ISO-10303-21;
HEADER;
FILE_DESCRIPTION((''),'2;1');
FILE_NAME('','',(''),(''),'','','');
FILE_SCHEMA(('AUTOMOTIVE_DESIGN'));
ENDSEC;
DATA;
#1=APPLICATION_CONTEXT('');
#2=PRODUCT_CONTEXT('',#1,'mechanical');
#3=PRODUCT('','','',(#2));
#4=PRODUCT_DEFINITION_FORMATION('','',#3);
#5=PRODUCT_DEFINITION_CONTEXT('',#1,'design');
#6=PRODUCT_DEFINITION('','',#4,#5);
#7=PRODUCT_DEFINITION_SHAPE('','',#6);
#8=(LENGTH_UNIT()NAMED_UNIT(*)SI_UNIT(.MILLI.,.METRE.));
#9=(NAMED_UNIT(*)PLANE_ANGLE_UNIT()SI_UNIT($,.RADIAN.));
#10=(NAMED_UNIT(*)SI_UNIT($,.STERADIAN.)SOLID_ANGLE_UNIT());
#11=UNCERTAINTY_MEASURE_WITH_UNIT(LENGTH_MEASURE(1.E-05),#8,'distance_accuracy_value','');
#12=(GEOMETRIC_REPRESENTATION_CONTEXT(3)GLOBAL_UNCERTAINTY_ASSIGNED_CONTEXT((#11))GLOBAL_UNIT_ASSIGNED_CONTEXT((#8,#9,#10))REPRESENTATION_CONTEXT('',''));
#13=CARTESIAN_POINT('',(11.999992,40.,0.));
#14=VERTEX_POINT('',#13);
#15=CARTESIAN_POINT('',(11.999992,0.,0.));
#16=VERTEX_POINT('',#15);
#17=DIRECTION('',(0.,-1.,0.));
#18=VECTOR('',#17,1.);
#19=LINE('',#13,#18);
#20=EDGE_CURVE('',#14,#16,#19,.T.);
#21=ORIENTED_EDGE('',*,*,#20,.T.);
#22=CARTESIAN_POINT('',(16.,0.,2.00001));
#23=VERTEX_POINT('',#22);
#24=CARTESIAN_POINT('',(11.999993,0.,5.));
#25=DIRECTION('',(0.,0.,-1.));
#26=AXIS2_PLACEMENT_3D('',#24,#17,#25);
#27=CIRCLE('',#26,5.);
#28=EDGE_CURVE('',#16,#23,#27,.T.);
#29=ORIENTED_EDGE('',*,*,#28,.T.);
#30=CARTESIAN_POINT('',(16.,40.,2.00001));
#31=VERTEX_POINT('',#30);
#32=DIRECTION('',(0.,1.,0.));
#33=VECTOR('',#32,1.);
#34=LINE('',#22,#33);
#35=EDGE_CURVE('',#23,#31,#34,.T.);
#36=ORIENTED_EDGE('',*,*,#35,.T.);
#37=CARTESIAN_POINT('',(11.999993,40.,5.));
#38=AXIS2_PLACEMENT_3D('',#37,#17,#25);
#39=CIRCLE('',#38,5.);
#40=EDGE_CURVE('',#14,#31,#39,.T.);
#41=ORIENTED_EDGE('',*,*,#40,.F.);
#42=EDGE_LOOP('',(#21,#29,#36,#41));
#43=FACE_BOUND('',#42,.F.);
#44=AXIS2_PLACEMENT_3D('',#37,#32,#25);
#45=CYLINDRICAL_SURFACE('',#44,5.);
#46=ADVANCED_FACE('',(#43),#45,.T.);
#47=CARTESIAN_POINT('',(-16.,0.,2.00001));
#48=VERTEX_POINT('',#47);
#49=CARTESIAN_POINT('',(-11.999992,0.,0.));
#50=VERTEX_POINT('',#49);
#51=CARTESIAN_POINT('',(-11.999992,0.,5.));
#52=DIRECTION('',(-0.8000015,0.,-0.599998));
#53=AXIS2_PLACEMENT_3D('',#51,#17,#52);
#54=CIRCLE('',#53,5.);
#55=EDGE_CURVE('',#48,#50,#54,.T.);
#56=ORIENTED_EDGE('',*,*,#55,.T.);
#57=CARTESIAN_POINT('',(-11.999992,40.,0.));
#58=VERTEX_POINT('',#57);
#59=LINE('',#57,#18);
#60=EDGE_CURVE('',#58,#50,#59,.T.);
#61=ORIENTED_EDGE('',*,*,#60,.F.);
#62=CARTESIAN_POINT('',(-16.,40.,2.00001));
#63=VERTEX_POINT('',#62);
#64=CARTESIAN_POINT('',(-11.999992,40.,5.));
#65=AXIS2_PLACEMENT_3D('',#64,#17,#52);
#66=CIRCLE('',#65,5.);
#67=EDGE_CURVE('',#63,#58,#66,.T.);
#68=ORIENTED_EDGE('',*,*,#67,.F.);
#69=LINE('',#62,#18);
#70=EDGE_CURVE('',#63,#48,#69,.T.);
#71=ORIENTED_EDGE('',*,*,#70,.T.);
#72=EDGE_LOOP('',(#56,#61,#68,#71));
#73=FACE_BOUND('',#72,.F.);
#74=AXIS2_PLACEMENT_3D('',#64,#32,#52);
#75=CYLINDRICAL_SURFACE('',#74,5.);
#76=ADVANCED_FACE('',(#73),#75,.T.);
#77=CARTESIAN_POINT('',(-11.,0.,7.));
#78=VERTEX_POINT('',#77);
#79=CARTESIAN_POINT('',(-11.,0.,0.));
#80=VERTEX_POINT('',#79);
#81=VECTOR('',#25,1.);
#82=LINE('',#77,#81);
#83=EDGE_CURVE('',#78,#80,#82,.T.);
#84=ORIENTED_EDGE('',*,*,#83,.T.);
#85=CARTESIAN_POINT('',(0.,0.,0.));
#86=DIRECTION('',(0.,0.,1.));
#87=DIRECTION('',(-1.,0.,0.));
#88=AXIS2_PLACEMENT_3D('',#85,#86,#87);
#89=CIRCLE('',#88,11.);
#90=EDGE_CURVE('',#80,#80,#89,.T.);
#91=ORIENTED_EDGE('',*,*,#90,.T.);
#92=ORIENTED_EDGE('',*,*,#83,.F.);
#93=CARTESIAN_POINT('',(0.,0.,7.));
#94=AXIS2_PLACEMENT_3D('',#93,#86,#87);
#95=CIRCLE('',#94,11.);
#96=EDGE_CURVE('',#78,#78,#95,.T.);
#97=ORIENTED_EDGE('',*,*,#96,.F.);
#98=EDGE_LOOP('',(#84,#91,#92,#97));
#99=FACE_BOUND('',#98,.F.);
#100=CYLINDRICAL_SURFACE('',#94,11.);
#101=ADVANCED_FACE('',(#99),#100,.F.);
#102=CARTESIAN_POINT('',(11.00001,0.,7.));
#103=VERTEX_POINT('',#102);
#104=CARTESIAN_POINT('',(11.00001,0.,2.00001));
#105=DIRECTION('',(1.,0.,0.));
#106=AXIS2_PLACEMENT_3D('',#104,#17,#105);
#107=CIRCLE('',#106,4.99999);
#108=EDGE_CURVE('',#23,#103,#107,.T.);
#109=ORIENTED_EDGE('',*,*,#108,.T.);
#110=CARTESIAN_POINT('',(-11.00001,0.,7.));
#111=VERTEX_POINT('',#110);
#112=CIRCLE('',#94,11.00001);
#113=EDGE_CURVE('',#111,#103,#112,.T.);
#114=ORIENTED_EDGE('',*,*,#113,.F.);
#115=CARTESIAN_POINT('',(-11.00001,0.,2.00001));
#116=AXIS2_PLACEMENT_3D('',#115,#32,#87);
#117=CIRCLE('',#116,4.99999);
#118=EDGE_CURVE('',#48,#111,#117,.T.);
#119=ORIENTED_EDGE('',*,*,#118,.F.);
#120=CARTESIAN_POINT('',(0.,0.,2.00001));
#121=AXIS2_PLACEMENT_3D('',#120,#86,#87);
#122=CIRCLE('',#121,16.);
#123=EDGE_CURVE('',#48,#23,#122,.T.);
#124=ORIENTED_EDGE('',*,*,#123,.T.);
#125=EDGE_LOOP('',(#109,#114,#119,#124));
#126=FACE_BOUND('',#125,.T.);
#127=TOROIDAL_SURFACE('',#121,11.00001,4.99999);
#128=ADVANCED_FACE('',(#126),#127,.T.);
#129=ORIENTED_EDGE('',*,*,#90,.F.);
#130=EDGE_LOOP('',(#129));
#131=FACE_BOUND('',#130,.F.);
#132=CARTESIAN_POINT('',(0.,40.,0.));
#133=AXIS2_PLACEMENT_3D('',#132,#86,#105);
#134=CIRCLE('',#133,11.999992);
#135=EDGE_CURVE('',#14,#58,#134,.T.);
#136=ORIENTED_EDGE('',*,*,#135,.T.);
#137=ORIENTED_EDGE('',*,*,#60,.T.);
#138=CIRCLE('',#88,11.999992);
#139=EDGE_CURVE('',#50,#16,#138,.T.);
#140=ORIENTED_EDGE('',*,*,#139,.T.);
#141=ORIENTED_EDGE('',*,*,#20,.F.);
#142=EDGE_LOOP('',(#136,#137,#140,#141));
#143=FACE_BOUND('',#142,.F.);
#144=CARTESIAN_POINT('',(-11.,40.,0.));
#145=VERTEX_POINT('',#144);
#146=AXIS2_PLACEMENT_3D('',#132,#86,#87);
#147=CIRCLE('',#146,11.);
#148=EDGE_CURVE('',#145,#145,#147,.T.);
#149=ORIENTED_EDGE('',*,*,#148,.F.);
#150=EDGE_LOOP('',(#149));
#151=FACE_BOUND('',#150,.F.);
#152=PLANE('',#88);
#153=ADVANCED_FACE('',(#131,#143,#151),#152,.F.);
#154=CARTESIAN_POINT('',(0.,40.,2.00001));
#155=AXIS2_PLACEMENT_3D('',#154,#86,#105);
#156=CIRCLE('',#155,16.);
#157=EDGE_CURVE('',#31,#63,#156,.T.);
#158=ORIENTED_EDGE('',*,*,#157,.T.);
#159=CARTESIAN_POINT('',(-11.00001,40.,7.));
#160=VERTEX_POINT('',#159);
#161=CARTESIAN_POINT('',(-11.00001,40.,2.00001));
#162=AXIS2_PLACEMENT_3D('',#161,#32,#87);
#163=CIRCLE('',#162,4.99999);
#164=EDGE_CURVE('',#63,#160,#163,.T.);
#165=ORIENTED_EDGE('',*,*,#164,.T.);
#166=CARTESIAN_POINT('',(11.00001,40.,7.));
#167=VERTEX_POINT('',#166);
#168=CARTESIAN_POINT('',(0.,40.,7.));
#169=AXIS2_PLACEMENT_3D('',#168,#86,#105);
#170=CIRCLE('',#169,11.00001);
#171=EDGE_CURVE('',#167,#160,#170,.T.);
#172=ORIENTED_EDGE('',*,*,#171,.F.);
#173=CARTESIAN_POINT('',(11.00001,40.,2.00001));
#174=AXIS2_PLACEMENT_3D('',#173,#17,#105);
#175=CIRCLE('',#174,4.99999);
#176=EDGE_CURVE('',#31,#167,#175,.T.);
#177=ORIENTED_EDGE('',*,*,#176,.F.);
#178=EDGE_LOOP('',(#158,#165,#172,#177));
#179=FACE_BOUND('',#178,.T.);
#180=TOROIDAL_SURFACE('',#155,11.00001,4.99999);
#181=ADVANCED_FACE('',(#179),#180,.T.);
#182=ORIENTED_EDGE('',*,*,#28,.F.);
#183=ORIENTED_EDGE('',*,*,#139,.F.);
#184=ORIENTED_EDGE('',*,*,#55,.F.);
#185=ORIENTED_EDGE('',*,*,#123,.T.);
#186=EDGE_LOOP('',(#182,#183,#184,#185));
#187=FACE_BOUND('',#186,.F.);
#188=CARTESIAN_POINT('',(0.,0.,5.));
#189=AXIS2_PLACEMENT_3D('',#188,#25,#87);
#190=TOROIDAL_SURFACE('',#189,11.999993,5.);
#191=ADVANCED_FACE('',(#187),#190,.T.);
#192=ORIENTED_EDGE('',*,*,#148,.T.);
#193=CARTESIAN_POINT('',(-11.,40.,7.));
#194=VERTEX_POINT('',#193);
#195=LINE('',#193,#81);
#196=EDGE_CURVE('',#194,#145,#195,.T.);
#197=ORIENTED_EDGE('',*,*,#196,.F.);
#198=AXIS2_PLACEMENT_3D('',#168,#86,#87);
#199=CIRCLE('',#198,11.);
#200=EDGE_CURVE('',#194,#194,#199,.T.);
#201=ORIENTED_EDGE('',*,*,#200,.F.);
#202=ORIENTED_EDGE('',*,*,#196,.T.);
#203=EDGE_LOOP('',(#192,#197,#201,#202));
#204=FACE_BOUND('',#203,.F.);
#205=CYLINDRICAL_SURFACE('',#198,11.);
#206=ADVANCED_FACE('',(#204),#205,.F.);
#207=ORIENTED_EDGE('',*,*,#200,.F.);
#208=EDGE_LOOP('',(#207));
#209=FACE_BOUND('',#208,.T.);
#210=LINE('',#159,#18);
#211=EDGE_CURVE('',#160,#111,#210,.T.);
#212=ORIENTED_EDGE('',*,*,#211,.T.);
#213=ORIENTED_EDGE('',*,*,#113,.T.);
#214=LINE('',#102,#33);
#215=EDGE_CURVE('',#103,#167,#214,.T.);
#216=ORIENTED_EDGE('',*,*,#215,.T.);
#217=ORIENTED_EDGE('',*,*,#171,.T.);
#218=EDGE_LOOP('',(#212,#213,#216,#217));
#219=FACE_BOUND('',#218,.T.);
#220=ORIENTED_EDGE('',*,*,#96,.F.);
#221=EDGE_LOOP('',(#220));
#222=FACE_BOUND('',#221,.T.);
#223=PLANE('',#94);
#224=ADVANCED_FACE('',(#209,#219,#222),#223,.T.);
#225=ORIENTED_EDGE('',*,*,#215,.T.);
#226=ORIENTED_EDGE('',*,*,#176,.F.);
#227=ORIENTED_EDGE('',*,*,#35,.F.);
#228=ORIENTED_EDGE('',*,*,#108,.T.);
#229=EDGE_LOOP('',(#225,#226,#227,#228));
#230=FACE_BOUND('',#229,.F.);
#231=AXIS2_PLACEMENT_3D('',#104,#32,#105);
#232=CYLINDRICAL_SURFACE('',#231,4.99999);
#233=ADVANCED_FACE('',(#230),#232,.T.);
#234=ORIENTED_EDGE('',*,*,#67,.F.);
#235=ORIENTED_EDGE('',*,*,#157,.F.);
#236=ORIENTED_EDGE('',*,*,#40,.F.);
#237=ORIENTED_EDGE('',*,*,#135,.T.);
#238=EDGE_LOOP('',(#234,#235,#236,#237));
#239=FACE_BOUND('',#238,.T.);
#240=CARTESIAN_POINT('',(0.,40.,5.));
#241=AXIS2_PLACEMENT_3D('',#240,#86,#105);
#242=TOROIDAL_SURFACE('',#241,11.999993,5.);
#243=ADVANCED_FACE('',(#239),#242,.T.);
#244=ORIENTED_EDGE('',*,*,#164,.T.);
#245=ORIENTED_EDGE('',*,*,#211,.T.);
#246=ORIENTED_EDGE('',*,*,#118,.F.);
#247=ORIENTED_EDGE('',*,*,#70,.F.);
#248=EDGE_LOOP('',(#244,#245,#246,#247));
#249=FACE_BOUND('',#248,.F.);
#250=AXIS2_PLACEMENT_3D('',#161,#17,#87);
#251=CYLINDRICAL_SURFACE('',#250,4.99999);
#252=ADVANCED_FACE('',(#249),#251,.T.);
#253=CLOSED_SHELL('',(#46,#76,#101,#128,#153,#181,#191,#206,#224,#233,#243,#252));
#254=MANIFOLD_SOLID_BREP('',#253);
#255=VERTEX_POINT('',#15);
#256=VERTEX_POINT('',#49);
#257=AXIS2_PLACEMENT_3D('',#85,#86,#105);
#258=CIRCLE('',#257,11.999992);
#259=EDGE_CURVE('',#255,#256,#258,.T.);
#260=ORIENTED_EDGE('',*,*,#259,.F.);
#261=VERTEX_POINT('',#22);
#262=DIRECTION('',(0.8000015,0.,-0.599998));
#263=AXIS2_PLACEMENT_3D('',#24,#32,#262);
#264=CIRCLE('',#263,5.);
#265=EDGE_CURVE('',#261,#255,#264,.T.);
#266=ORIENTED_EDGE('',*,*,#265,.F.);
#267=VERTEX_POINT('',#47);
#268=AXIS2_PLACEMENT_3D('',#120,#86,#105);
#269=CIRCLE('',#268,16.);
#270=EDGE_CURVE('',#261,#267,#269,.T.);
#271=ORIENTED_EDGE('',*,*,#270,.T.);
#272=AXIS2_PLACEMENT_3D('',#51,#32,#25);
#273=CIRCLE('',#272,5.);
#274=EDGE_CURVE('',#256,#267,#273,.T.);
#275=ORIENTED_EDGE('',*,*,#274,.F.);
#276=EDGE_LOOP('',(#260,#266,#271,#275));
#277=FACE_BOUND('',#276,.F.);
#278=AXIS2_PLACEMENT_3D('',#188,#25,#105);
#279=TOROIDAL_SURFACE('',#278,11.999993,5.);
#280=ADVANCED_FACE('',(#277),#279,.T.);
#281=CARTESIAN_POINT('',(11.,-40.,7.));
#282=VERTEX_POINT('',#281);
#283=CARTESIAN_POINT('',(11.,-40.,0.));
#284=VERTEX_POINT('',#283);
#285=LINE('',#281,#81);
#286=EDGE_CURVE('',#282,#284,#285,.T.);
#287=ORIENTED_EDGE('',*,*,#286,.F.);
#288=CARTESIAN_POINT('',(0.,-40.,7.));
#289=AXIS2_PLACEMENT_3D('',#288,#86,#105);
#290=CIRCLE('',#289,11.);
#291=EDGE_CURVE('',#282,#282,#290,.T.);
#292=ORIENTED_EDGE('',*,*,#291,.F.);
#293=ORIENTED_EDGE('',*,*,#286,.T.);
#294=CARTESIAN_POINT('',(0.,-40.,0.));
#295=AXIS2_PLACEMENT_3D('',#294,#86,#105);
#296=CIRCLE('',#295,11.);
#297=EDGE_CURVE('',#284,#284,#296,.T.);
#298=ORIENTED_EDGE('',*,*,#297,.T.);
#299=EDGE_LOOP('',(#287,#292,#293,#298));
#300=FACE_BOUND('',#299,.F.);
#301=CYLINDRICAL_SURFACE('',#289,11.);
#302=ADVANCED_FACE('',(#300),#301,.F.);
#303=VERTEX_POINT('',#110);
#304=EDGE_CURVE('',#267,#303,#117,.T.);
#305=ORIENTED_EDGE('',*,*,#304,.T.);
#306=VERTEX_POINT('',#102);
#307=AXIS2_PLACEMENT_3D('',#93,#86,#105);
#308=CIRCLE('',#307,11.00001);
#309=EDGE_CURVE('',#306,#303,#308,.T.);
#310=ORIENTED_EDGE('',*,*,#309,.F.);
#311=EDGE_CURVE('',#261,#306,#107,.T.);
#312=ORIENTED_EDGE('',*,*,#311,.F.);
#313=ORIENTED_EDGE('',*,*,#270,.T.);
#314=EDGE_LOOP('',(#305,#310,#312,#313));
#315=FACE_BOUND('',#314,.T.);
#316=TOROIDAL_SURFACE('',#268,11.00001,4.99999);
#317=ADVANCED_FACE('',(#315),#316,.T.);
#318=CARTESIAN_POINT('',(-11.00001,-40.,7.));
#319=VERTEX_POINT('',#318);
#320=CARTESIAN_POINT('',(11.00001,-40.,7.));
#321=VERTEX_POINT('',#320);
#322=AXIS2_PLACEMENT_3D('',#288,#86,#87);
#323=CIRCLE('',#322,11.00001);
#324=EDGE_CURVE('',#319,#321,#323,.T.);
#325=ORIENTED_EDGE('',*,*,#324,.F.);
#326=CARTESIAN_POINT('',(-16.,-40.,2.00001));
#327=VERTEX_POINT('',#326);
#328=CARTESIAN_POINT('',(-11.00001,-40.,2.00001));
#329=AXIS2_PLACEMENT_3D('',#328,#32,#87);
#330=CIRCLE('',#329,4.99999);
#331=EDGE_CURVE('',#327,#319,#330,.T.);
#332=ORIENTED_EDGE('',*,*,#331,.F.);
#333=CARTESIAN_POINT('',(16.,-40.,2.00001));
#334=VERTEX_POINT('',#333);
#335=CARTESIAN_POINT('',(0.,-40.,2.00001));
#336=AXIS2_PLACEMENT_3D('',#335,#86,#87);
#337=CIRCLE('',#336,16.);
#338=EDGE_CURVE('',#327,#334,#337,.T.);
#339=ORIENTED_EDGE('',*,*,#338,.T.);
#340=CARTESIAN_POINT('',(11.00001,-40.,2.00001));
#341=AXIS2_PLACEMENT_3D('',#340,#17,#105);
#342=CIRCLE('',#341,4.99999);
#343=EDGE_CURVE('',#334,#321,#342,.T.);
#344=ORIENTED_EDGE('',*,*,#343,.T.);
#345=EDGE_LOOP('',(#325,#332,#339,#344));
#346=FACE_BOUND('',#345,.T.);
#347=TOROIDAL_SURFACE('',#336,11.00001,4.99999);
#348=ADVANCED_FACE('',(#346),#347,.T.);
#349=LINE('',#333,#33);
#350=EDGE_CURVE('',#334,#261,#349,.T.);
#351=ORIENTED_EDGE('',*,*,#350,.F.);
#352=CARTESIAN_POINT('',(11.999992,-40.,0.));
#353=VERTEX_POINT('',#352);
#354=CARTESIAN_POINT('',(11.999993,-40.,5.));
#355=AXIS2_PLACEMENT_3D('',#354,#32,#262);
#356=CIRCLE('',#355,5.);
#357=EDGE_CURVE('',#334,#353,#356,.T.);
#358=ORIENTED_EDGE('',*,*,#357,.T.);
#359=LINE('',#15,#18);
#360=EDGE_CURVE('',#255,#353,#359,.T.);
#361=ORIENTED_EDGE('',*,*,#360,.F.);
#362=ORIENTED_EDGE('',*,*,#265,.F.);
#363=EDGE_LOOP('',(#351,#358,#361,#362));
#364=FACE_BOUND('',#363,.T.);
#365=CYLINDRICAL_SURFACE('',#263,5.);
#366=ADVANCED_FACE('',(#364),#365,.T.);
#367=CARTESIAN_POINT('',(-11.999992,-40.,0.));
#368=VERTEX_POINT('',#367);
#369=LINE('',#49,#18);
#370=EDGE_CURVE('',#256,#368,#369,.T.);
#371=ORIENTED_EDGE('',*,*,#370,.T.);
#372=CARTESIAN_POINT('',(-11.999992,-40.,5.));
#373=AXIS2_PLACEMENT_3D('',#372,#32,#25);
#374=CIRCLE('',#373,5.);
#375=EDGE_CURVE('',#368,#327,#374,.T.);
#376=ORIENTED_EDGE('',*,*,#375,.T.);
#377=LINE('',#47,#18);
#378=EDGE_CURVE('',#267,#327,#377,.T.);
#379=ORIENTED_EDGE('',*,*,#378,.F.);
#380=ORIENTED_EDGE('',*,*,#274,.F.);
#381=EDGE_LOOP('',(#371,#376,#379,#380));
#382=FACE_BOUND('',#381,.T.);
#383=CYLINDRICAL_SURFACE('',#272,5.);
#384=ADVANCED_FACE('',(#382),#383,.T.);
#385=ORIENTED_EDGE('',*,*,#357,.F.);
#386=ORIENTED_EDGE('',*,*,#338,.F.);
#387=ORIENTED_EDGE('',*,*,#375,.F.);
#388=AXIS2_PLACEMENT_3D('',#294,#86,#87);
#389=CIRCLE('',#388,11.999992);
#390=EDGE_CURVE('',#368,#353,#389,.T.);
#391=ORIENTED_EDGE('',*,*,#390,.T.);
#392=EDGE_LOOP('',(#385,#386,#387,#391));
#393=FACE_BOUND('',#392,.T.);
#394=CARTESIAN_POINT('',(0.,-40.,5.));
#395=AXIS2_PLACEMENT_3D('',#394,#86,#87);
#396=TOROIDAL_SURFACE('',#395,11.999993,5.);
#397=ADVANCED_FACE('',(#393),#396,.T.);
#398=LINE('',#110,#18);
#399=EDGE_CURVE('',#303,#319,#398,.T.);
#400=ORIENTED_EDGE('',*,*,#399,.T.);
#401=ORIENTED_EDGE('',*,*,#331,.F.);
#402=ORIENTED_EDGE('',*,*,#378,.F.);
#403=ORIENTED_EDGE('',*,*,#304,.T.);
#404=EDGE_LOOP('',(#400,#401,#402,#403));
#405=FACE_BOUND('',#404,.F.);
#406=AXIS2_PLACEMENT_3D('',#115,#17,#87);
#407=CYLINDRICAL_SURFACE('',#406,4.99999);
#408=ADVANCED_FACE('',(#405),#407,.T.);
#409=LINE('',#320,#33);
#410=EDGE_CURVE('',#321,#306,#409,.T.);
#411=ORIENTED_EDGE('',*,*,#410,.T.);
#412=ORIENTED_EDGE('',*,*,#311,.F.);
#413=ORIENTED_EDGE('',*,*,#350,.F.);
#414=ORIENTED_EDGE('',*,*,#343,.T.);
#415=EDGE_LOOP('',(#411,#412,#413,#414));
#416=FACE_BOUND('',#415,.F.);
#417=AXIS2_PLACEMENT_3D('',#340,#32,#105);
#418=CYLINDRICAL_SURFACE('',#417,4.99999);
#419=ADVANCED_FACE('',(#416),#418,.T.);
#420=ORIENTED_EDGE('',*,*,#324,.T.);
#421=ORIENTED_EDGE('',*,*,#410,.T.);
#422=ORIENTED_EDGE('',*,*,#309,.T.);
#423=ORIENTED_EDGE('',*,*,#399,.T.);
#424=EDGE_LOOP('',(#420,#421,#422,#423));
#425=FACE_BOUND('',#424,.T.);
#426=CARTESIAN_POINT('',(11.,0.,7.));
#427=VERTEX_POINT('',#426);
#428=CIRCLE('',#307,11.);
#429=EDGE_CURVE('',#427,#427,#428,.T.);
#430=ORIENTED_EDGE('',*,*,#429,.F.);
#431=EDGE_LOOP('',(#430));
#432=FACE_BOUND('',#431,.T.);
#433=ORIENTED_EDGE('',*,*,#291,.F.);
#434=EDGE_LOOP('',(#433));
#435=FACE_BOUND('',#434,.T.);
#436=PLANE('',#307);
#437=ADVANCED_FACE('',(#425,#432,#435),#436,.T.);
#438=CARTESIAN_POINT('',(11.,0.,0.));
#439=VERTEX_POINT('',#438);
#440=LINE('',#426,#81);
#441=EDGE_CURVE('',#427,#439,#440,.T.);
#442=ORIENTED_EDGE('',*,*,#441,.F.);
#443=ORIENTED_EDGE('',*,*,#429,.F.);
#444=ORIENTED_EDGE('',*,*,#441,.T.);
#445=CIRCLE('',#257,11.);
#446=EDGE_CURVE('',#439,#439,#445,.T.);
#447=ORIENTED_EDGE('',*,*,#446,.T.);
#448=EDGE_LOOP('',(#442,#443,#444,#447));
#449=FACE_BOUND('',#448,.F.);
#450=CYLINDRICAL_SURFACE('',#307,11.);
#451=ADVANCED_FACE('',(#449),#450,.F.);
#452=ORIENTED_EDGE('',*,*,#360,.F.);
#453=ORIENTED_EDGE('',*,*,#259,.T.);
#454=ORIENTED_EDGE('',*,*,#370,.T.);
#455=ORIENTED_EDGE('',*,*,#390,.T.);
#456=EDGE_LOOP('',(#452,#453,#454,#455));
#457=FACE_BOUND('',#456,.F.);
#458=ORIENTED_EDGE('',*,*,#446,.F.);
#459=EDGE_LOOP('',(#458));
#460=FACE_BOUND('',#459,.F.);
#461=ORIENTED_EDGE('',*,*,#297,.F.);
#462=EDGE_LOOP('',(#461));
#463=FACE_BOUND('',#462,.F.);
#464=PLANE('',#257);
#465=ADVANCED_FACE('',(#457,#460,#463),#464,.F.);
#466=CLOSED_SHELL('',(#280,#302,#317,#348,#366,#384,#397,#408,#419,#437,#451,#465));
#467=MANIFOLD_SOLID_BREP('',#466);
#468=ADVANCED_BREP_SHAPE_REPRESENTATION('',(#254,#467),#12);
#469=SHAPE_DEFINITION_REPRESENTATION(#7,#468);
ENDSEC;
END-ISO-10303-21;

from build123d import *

# Parameters (mm, degrees)
F1_DEPTH      = 7
F2_R          = 11
F3_DEPTH      = 7
F5_COUNT      = 2
F6_R          = 4.99999
F6_2_R        = 4.99999
F7_T1_DEPTH   = 40
F7_T4_ANGLE   = 180
F7_T6_ANGLE   = 180
F7_2_T1_DEPTH = 40
F7_2_T4_ANGLE = 180
F7_2_T6_ANGLE = 180


# Not quite as in the source:
# - a fillet or chamfer that OpenCascade refuses, or shapes differently, is made with other operations: its cross-section is extruded or revolved along the edge and cut away or added
# - a fillet or chamfer is up to 0.001 mm smaller than in the source, because OpenCascade refuses the exact size


with BuildPart() as f1:
    # F0 (on Top) → F1 (new body)
    with BuildSketch(Plane.XY):
        with BuildLine():
            ThreePointArc((-16, 0), (0, -16), (16, 0))
            ThreePointArc((16, 0), (0, 16), (-16, 0))
        make_face()
        with BuildLine():
            Line((16, -40), (16, 0))
            ThreePointArc((16, 0), (0, -16), (-16, 0))
            Line((-16, 0), (-16, -40))
            ThreePointArc((-16, -40), (0, -24), (16, -40))
        make_face()
        with BuildLine():
            ThreePointArc((-16, -40), (0, -56), (16, -40))
            ThreePointArc((16, -40), (0, -24), (-16, -40))
        make_face()
    extrude(amount=F1_DEPTH)

    # F2 (on face) → F3 (cut, through all)
    with BuildSketch(Plane.XY.offset(7)):
        Circle(F2_R)
        with Locations((0, -40)):
            Circle(F2_R)
    extrude(amount=-F3_DEPTH, mode=Mode.SUBTRACT)


with BuildPart() as f5_1:
    # F5: instance of F1
    add(f1.part.rotate(Axis((0, 0, -3.6183325574), (0, 0, -1)), 1 * 360 / F5_COUNT))

    # F6#2 (radius 5 in the source; OpenCascade refuses exactly that, so slightly less here)
    f6_2_edges = [f5_1.edges().sort_by_distance(p)[0] for p in [
        (-16, 20, 7),
    ]]
    fillet(f6_2_edges, radius=F6_2_R)

    # F7#2: fillet of radius 5 on 1 edges, made by hand

    # F7_2_s2 → F7_2_t1 (cut)
    with BuildSketch(Plane.XZ.offset(-40)):
        with BuildLine():
            ThreePointArc((-16, 2.00001), (-14.2360660677, 0.5278668401), (-11.9999925, 0))
            Line((-11.9999925, 0), (-16, 0))
            Line((-16, 0), (-16, 2.00001))
        make_face()
        with BuildLine():
            ThreePointArc((11.9999925, 0), (14.2360660677, 0.5278668401), (16, 2.00001))
            Line((16, 2.00001), (16, 0))
            Line((16, 0), (11.9999925, 0))
        make_face()
    extrude(amount=F7_2_T1_DEPTH, mode=Mode.SUBTRACT)

    # F7_2_s3 → F7_2_t4 (revolve, cut)
    with BuildSketch(Plane.XZ.offset(-40)):
        with BuildLine():
            ThreePointArc((11.9999925, 0), (14.2360660677, 0.5278668401), (16, 2.00001))
            Line((16, 2.00001), (16, 0))
            Line((16, 0), (11.9999925, 0))
        make_face()
    revolve(axis=Axis((0, 40, 0), (0, 0, 1)), revolution_arc=F7_2_T4_ANGLE, mode=Mode.SUBTRACT)

    # F7_2_s5 → F7_2_t6 (revolve, cut)
    with BuildSketch(Plane.XZ):
        with BuildLine():
            ThreePointArc((-16, 2.00001), (-14.2360660677, 0.5278668401), (-11.9999925, 0))
            Line((-11.9999925, 0), (-16, 0))
            Line((-16, 0), (-16, 2.00001))
        make_face()
    revolve(axis=Axis((0, 0, 0), (0, 0, 1)), revolution_arc=F7_2_T6_ANGLE, mode=Mode.SUBTRACT)


with BuildPart() as f1_1:
    add(f1.part)

    # F6 (radius 5 in the source; OpenCascade refuses exactly that, so slightly less here)
    f6_edges = [f1_1.edges().sort_by_distance(p)[0] for p in [
        (-16, -20, 7),
    ]]
    fillet(f6_edges, radius=F6_R)

    # F7: fillet of radius 5 on 1 edges, made by hand

    # F7_s2 → F7_t1 (cut)
    with BuildSketch(Plane.XZ):
        with BuildLine():
            ThreePointArc((-11.9999925, 0), (-14.2360660677, 0.5278668401), (-16, 2.00001))
            Line((-16, 2.00001), (-16, 0))
            Line((-16, 0), (-11.9999925, 0))
        make_face()
        with BuildLine():
            ThreePointArc((16, 2.00001), (14.2360660677, 0.5278668401), (11.9999925, 0))
            Line((11.9999925, 0), (16, 0))
            Line((16, 0), (16, 2.00001))
        make_face()
    extrude(amount=F7_T1_DEPTH, mode=Mode.SUBTRACT)

    # F7_s3 → F7_t4 (revolve, cut)
    with BuildSketch(Plane.XZ):
        with BuildLine():
            ThreePointArc((16, 2.00001), (14.2360660677, 0.5278668401), (11.9999925, 0))
            Line((11.9999925, 0), (16, 0))
            Line((16, 0), (16, 2.00001))
        make_face()
    revolve(axis=Axis((0, 0, 0), (0, 0, 1)), revolution_arc=F7_T4_ANGLE, mode=Mode.SUBTRACT)

    # F7_s5 → F7_t6 (revolve, cut)
    with BuildSketch(Plane.XZ.offset(40)):
        with BuildLine():
            ThreePointArc((-11.9999925, 0), (-14.2360660677, 0.5278668401), (-16, 2.00001))
            Line((-16, 2.00001), (-16, 0))
            Line((-16, 0), (-11.9999925, 0))
        make_face()
    revolve(axis=Axis((0, -40, 0), (0, 0, 1)), revolution_arc=F7_T6_ANGLE, mode=Mode.SUBTRACT)


solid = Compound([f5_1.part, f1_1.part])
